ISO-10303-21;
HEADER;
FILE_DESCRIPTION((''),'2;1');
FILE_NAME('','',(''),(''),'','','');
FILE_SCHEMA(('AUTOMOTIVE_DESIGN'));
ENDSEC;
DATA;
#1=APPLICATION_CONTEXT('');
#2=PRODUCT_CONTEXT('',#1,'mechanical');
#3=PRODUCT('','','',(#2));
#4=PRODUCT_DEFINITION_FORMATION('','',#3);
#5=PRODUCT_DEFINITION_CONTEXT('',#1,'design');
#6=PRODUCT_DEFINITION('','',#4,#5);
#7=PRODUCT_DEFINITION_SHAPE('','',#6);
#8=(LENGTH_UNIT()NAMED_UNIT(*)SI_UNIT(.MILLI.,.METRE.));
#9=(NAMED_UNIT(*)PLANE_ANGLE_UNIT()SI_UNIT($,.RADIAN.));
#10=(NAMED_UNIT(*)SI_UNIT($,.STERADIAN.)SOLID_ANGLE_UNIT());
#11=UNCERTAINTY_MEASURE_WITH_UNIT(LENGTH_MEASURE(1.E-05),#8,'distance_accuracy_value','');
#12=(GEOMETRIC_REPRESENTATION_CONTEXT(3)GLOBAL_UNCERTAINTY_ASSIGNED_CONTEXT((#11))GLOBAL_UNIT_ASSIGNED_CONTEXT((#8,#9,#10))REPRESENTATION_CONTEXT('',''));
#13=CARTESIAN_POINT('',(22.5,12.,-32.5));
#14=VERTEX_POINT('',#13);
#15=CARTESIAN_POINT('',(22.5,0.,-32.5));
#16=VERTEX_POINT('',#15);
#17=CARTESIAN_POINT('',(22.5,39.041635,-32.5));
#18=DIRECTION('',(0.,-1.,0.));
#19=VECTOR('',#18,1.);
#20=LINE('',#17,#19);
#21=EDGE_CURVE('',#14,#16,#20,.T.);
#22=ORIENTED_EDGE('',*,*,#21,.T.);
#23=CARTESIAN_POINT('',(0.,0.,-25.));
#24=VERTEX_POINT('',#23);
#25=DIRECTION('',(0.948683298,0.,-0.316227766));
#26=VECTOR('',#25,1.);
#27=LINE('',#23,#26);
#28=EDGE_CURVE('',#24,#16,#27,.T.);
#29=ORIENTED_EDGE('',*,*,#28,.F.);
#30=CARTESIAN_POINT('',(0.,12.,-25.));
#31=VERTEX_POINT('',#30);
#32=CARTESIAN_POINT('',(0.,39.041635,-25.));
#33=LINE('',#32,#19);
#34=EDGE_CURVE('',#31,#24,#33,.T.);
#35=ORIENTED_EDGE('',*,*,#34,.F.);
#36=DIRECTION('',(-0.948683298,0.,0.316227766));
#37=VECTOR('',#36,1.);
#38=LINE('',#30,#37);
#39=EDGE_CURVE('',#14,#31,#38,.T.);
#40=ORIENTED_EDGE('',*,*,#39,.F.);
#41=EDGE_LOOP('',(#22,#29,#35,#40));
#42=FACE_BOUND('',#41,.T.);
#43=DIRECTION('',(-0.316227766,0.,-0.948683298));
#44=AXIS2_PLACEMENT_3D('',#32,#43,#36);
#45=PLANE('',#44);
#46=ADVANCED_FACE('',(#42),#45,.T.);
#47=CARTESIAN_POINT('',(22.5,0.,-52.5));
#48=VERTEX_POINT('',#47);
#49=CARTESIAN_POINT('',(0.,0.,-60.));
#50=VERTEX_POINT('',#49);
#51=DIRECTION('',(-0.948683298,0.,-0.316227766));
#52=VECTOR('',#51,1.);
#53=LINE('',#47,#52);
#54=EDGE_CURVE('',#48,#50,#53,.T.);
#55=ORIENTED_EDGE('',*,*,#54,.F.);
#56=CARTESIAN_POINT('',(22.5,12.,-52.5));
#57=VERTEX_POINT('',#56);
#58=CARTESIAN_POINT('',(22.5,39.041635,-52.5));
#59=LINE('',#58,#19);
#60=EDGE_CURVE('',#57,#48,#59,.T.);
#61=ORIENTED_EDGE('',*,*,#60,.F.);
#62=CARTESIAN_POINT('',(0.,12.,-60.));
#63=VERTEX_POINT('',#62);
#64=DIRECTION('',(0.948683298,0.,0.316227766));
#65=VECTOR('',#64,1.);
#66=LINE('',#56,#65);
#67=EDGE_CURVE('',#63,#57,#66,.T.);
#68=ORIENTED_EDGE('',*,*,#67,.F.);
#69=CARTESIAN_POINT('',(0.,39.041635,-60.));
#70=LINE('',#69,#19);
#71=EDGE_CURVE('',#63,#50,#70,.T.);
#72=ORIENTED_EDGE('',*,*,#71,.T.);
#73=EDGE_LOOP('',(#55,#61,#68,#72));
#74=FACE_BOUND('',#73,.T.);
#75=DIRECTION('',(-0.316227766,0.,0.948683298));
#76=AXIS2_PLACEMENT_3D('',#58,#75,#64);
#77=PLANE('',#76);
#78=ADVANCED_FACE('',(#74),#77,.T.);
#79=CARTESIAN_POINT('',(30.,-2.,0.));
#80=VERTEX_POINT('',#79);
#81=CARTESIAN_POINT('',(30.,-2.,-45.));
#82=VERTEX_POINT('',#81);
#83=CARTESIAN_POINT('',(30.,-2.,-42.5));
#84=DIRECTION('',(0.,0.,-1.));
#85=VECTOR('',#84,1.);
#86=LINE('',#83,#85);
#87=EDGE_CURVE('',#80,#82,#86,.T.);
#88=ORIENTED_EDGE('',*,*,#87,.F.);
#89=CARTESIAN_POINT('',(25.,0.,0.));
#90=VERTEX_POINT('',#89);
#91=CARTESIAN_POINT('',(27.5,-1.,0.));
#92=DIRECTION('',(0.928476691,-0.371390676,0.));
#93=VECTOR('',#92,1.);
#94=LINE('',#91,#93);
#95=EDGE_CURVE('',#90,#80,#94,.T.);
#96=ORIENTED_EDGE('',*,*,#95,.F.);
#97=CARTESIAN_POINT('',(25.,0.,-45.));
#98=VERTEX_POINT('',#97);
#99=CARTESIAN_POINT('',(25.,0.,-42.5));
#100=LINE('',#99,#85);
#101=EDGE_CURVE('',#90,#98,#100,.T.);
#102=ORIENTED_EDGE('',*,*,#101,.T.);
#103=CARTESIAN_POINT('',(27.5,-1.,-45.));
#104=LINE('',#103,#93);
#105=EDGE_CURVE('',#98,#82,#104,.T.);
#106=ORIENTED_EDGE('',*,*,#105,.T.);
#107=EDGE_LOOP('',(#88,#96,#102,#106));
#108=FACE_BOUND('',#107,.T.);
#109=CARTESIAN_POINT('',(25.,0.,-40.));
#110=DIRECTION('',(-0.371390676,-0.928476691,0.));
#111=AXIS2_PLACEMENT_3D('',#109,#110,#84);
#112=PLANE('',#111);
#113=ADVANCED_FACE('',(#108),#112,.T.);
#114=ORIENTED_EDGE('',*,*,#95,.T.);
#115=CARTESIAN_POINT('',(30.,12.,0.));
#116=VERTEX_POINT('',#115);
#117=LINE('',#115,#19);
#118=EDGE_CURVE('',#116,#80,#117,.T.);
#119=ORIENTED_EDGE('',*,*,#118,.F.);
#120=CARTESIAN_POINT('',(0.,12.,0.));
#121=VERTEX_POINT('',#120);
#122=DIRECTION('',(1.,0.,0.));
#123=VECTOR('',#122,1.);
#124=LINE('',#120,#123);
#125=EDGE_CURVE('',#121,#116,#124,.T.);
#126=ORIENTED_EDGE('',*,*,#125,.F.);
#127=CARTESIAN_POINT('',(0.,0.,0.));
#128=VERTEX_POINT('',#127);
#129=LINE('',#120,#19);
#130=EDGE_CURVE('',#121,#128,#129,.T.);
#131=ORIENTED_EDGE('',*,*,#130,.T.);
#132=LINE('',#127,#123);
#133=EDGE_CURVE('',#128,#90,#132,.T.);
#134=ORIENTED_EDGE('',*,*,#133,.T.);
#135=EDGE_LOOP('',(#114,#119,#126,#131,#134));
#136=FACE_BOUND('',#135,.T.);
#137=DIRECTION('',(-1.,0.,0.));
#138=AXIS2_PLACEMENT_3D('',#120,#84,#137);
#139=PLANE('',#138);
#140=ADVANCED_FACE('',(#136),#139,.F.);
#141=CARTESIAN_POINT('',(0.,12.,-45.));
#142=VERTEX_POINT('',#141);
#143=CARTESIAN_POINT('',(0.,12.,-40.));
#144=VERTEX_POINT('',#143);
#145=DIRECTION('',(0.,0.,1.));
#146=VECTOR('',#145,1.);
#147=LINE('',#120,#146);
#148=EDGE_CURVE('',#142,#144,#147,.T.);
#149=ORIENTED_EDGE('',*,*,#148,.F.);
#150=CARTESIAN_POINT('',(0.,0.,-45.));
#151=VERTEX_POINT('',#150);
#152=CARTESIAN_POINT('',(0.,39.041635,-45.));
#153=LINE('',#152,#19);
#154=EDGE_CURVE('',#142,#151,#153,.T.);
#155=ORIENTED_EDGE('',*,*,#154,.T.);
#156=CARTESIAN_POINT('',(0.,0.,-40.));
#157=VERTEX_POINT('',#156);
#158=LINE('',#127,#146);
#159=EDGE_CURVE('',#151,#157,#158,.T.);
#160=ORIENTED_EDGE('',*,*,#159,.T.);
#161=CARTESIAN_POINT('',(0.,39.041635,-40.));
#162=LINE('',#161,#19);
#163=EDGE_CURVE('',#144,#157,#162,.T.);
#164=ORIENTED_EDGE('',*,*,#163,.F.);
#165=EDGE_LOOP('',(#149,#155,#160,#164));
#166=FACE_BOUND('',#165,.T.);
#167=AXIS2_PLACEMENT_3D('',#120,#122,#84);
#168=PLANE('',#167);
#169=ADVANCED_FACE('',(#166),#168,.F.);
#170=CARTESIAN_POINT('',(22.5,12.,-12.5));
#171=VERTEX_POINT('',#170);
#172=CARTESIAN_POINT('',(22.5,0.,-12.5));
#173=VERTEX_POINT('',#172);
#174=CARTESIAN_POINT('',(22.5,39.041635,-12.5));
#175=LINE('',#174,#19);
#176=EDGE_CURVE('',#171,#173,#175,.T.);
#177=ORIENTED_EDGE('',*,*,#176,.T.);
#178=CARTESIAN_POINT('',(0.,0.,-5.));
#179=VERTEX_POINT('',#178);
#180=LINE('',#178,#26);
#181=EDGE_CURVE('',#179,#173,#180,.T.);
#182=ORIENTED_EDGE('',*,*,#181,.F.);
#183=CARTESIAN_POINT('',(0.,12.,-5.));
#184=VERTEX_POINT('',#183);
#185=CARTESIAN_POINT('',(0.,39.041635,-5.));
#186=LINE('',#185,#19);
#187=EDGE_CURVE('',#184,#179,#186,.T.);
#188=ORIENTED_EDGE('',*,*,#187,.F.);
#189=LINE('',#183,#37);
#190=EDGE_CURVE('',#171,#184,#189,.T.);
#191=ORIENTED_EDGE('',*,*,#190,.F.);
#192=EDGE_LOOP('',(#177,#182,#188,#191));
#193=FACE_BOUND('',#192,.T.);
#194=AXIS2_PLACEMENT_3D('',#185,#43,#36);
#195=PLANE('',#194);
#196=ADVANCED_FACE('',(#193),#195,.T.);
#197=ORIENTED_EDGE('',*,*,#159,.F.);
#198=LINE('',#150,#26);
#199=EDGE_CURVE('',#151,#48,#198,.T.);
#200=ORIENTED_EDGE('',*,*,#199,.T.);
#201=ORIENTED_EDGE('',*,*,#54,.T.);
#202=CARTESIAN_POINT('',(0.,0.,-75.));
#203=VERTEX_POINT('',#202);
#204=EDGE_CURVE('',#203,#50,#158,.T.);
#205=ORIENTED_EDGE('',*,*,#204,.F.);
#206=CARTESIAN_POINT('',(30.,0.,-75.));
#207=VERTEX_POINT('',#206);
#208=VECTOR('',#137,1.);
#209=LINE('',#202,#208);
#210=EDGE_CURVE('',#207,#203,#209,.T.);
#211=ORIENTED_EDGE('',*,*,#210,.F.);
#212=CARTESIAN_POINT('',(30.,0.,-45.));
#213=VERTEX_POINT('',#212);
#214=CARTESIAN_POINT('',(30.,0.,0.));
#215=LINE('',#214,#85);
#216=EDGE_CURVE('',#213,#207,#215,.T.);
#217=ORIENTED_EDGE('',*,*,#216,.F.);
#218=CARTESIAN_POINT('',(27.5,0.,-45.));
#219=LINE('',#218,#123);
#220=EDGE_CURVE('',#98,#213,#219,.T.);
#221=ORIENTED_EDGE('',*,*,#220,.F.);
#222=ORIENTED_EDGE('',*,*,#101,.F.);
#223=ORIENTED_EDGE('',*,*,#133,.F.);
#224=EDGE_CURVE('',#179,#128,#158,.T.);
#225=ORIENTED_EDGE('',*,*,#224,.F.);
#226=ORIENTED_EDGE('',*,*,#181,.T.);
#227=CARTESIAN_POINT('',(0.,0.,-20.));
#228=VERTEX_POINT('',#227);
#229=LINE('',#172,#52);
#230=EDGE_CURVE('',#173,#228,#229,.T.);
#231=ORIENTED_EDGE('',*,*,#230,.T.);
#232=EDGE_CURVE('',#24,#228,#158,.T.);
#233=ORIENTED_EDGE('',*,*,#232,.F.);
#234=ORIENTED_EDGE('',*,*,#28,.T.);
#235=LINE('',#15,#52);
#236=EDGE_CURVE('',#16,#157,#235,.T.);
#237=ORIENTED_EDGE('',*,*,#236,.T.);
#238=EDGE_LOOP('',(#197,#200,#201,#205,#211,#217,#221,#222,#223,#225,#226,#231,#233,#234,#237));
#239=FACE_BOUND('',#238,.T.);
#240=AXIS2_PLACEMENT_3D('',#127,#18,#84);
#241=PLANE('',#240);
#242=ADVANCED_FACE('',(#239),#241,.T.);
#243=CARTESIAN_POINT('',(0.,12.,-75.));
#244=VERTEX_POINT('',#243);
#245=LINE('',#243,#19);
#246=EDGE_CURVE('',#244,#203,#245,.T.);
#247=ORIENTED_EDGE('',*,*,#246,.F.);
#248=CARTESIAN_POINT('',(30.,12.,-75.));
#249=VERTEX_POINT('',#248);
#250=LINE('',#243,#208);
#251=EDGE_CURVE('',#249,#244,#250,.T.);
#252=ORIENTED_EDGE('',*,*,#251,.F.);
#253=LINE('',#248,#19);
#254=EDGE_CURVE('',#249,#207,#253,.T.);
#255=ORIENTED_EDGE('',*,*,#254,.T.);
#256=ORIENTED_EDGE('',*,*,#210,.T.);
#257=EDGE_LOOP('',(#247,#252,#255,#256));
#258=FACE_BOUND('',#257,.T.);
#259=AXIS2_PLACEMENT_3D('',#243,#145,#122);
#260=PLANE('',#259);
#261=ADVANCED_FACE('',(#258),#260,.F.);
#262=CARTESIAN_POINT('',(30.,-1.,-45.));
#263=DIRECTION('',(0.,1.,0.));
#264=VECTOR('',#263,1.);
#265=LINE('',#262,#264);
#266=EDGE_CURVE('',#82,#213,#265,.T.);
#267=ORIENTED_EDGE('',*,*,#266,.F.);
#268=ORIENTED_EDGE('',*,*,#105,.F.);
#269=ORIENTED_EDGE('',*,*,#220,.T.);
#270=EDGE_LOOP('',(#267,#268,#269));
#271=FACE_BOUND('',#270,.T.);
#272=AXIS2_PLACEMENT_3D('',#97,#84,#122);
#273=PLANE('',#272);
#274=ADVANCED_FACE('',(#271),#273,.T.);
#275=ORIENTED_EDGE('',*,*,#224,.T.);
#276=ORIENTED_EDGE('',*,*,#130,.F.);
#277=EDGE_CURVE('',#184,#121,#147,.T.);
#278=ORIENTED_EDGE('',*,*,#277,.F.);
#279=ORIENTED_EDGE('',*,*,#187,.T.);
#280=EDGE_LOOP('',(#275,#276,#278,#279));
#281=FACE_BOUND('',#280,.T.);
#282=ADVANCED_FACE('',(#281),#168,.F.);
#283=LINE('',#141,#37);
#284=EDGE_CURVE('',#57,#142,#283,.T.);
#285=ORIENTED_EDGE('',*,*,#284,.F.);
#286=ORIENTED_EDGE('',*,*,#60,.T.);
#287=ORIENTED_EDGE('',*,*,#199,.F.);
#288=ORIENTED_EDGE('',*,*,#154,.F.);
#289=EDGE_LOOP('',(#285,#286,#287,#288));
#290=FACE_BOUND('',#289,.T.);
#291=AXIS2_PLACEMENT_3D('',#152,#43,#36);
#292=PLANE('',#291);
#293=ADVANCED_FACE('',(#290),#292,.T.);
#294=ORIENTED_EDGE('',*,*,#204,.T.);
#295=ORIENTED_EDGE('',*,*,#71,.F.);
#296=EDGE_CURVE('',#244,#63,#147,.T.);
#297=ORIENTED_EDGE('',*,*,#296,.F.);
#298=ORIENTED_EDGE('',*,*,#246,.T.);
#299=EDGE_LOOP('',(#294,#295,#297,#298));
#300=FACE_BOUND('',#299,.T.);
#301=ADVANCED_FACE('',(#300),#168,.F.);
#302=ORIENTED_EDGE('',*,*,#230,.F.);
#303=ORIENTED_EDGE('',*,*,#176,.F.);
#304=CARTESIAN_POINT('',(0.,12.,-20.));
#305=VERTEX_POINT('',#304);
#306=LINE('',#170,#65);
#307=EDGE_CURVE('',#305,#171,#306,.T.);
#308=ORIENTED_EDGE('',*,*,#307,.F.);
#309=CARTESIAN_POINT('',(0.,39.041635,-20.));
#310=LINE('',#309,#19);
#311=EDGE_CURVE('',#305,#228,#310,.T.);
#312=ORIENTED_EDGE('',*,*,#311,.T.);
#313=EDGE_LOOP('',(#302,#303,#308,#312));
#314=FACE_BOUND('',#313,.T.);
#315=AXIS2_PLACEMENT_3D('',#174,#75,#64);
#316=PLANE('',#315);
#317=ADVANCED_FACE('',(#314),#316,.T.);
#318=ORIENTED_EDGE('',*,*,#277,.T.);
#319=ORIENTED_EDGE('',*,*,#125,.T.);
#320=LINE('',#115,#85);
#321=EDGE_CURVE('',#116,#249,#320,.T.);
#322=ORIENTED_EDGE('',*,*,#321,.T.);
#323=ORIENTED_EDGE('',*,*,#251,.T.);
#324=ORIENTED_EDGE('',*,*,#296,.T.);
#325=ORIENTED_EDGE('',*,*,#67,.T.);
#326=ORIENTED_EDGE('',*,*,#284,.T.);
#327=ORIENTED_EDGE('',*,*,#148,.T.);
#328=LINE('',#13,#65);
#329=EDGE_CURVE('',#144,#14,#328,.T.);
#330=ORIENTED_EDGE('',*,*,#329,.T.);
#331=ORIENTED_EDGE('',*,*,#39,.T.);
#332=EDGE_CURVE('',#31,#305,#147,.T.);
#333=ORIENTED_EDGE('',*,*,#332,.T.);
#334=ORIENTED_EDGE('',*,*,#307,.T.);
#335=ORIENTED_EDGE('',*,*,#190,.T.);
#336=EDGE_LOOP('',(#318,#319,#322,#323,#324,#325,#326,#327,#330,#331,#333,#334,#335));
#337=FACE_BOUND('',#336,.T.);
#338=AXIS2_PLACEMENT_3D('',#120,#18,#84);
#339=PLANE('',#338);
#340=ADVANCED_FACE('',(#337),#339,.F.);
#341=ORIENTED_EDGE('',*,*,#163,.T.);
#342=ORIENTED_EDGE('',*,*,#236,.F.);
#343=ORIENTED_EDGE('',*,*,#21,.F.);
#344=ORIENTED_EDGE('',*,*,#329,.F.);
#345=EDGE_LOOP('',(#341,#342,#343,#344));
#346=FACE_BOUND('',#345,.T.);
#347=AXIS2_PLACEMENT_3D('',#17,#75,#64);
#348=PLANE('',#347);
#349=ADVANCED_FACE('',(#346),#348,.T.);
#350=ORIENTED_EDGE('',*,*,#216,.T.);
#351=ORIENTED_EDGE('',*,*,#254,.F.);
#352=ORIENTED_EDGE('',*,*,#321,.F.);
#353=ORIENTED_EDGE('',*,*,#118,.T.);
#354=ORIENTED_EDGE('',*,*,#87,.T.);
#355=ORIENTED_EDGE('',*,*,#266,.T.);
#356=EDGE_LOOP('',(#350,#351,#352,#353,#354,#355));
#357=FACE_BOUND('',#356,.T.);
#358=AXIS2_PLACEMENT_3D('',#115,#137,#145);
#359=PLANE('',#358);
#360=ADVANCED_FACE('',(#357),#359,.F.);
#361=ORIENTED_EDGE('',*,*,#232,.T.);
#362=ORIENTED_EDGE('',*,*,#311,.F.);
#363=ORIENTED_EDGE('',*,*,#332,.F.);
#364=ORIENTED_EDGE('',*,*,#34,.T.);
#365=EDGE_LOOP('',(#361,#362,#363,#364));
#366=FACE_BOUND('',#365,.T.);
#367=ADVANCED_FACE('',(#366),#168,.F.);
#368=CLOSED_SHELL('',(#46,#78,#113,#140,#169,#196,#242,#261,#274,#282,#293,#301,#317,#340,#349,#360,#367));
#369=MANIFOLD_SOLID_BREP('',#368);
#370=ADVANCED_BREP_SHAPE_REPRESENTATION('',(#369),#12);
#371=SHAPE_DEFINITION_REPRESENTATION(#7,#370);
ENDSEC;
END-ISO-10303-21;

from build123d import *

# Parameters (mm, degrees)
SKETCH1_W           = 30
SKETCH1_H           = 75
BOSS_EXTRUDE1_DEPTH = 12
CUT_EXTRUDE1_DEPTH  = 12
LPATTERN1_COUNT     = 3
LPATTERN1_PITCH     = 20
BOUNDARY1_START     = -45
BOUNDARY1_DEPTH     = 5
LPATTERN2_COUNT     = 9
LPATTERN2_PITCH     = 5


# Read off the part's stored shape, not the designer's step: Boundary1
with BuildPart() as part:
    # Sketch1 → Boss-Extrude1 (new body)
    with BuildSketch(Plane(origin=(0, 0, 0), x_dir=(1, 0, 0), z_dir=(0, 1, 0))):
        with Locations((15, 37.5)):
            Rectangle(SKETCH1_W, SKETCH1_H)
    extrude(amount=BOSS_EXTRUDE1_DEPTH)

    # Sketch3 → Cut-Extrude1 (cut)
    with BuildSketch(Plane(origin=(0, 0, 0), x_dir=(1, 0, 0), z_dir=(0, 1, 0))):
        Polygon((0, 5), (22.5, 12.5), (0, 20), align=None)
    cut_extrude1 = extrude(amount=CUT_EXTRUDE1_DEPTH, mode=Mode.SUBTRACT)

    # LPattern1: Cut-Extrude1 ×3
    with Locations(*[(0, 0, -i * LPATTERN1_PITCH) for i in range(1, LPATTERN1_COUNT)]):
        add(cut_extrude1, mode=Mode.SUBTRACT)

    # Boundary1 outline → Boundary1 (add)
    with BuildSketch(Plane.XY.offset(BOUNDARY1_START)):
        Polygon((30, 0), (25, 0), (30, -2), align=None)
    boundary1 = extrude(amount=BOUNDARY1_DEPTH)

    # LPattern2: Boundary1 ×9
    with Locations(*[(0, 0, i * LPATTERN2_PITCH) for i in range(1, LPATTERN2_COUNT)]):
        add(boundary1)


solid = part.part
